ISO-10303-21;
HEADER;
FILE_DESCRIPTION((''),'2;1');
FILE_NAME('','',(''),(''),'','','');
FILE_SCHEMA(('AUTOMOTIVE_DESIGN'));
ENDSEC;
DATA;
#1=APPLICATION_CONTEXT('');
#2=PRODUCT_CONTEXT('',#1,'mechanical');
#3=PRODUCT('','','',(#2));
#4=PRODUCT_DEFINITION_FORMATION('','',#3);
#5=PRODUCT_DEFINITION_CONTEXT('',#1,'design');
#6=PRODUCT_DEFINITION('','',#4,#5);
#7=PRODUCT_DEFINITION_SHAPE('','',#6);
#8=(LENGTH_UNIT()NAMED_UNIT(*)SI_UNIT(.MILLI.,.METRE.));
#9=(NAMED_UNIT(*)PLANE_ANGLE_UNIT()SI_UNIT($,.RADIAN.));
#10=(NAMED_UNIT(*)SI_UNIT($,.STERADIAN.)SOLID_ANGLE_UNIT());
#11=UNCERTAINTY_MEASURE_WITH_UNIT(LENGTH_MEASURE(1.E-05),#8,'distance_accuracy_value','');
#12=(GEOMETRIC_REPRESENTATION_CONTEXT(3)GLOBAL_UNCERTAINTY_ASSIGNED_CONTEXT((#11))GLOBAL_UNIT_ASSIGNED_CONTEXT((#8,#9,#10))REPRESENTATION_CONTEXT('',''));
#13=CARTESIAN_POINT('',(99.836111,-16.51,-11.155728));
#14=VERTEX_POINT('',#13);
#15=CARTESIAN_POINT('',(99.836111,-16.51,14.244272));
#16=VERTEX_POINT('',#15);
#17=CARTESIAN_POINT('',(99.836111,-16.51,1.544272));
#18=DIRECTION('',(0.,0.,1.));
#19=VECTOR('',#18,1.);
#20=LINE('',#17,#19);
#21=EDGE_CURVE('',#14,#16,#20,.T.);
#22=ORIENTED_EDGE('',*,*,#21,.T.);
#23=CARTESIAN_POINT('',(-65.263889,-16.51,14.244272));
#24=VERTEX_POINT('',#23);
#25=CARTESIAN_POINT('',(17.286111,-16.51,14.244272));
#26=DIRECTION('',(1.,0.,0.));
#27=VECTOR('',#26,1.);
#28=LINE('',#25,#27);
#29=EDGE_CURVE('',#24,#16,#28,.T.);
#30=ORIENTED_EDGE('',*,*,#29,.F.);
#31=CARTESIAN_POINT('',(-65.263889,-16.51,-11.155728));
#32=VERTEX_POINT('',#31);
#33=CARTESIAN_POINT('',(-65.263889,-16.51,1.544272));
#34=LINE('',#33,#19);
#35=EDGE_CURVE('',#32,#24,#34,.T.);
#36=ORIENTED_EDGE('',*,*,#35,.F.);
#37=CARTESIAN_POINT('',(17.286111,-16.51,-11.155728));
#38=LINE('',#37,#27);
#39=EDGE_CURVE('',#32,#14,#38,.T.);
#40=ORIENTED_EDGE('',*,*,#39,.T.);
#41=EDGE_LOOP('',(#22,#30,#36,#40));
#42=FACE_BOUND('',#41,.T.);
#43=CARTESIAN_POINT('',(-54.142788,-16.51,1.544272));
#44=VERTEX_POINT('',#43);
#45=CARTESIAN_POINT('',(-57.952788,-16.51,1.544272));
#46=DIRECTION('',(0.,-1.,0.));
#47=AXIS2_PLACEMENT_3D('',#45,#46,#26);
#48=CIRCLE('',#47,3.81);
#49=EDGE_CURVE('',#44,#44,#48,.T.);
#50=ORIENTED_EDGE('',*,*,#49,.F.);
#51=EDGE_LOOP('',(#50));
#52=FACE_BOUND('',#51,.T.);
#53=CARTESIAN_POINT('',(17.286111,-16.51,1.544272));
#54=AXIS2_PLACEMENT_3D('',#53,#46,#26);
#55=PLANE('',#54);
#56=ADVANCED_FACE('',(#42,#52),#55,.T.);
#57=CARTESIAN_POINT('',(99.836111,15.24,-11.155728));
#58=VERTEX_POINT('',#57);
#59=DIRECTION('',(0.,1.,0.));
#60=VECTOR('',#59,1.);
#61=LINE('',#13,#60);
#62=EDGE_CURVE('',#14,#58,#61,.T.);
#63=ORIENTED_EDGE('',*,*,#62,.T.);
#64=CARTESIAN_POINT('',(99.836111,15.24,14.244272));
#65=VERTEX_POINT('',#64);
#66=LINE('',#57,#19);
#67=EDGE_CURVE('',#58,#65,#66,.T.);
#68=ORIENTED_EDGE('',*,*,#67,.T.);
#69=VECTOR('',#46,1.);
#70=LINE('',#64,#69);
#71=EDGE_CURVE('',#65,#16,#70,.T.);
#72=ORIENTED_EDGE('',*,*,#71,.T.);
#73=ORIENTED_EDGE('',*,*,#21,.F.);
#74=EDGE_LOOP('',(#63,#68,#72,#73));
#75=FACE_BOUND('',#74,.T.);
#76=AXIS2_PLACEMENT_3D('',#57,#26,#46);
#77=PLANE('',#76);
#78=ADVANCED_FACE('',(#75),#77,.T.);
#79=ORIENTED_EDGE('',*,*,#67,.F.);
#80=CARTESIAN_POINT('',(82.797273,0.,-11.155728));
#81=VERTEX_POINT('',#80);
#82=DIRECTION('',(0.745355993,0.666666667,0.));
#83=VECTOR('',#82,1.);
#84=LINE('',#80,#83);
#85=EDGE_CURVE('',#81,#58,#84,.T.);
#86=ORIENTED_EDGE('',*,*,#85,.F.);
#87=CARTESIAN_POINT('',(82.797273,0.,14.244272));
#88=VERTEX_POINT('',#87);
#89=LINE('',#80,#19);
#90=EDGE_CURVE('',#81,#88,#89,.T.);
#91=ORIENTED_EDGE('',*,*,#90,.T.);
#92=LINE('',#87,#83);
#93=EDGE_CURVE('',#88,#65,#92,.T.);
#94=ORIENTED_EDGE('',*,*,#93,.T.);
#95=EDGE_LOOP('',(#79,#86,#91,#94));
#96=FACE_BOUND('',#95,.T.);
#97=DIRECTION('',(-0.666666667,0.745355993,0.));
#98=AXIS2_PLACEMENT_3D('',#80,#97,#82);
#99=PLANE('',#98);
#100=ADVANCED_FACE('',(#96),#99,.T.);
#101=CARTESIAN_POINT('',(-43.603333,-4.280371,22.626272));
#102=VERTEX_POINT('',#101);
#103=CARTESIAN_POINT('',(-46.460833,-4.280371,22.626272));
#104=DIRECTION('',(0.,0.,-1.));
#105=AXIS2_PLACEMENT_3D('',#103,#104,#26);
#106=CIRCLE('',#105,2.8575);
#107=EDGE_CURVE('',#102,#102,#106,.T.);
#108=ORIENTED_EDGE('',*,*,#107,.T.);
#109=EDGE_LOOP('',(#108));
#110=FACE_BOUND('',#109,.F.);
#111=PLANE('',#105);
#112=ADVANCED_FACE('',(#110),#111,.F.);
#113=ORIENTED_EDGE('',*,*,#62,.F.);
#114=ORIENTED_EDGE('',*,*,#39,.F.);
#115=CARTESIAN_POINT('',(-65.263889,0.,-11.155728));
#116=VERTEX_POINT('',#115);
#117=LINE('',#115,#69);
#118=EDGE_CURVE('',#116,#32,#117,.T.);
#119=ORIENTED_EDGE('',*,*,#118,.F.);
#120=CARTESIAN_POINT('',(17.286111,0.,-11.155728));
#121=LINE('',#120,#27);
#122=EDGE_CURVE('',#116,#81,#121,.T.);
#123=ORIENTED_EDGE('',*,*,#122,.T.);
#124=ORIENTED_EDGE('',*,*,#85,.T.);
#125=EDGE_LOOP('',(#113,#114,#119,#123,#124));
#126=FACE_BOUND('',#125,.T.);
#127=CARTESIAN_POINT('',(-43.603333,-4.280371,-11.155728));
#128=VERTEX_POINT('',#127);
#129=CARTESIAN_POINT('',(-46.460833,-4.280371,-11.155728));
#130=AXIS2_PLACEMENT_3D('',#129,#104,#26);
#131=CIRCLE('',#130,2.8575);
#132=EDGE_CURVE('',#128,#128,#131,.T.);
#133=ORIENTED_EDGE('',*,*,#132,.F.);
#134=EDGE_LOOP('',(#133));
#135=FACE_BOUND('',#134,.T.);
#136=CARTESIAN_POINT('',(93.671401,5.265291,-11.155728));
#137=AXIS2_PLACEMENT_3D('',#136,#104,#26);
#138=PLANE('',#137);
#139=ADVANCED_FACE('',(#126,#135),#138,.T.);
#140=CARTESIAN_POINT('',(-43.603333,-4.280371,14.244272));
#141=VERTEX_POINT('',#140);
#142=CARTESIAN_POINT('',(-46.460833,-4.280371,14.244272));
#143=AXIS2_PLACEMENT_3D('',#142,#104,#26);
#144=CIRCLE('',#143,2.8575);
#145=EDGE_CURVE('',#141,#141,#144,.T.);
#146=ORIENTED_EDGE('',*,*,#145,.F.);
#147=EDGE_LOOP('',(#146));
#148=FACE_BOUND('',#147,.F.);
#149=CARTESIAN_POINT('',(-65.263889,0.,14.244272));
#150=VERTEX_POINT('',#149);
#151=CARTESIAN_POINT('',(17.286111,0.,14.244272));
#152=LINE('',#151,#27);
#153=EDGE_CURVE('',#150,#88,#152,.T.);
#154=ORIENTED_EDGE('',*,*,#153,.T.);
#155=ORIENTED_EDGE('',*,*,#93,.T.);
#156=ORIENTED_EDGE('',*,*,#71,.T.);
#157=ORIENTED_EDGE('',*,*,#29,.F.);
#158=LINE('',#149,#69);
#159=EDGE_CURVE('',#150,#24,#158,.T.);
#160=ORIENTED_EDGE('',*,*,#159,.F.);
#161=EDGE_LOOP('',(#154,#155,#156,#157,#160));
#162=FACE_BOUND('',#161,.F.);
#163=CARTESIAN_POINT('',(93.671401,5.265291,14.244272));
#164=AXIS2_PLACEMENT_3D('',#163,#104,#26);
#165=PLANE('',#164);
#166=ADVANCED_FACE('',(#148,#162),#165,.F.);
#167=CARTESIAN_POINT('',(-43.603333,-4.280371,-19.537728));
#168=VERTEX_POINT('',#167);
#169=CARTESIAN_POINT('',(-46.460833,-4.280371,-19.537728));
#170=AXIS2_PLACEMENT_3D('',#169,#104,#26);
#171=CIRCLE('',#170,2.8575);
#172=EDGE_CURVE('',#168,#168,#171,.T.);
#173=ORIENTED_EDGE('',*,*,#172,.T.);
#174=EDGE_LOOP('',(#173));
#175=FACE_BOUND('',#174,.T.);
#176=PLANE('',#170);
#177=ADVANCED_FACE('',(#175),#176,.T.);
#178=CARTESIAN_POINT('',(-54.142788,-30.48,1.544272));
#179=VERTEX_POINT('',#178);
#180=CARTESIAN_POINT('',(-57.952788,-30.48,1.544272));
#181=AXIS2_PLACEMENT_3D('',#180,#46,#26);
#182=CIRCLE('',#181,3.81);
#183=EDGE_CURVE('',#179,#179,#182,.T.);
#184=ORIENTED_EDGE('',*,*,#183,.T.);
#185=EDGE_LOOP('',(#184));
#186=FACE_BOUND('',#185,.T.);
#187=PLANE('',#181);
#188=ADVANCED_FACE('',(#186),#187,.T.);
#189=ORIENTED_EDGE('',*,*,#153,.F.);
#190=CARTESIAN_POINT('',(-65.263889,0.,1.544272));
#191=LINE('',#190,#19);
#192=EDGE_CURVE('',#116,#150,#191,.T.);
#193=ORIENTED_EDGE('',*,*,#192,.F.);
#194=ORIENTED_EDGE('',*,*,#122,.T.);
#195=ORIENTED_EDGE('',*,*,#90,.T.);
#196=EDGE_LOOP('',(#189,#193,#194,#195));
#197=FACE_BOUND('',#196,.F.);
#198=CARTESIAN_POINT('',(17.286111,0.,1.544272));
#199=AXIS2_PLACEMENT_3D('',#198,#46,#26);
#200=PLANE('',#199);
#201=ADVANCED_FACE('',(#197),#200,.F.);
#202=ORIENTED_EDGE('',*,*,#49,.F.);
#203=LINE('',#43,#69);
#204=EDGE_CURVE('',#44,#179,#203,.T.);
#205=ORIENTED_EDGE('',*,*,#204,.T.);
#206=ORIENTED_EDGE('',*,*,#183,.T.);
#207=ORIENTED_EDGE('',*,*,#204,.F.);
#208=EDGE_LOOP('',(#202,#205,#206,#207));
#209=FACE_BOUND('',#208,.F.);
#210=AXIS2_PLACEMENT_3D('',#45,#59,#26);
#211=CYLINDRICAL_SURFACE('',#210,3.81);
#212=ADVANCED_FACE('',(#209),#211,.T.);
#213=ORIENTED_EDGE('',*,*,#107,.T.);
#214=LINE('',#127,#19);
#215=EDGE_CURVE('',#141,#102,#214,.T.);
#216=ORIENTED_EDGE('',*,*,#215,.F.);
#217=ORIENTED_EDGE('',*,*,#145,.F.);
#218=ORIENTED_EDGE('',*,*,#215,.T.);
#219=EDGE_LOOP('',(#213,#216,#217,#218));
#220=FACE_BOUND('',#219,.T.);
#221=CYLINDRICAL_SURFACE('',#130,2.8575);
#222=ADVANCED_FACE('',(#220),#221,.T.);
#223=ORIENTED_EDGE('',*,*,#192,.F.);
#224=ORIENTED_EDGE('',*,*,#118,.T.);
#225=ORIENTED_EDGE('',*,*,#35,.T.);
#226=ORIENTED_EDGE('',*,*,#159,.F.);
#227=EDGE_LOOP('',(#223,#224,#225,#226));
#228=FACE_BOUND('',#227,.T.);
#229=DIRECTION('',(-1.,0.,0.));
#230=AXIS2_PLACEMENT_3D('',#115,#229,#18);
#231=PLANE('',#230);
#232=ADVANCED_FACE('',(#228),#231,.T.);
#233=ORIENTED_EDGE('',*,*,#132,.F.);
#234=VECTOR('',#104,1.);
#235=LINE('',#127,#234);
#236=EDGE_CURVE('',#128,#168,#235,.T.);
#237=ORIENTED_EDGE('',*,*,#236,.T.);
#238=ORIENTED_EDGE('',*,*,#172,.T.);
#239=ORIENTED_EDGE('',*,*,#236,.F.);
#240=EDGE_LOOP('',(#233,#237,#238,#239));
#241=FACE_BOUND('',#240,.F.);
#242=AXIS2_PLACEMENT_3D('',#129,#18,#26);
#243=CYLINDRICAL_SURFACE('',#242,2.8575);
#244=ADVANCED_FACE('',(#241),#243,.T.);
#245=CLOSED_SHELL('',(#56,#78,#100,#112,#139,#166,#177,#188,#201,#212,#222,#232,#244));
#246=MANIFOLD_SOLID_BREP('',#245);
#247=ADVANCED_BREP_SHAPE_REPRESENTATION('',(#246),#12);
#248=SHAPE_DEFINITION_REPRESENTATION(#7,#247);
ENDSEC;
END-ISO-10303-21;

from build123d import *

# Parameters (mm, degrees)
F0_W          = 165.1
F0_H          = 25.4
F1_DEPTH      = 16.51
F2_R          = 3.81
F3_DEPTH      = 13.97
F5_R          = 2.8575
F6_DEPTH      = 8.382
F6_DEPTH_BACK = 33.782
F7_DEPTH      = 25.4


# Not quite as in the source:
# - a feature names something its author has since deleted; it is built from what else it names


with BuildPart() as f1:
    # F0 (on Front) → F1 (new body)
    with BuildSketch(Plane.XZ):
        with Locations((17.2861106694, 1.5442719363)):
            Rectangle(F0_W, F0_H)
    extrude(amount=F1_DEPTH)

    # F2 (on face) → F3 (join)
    with BuildSketch(Plane.XZ.offset(16.51)):
        with Locations((-57.9527877271, 1.5442719363)):
            Circle(F2_R)
    extrude(amount=F3_DEPTH)

    # F5 (on face) → F6 (join, two sides)
    with BuildSketch(Plane(origin=(0, 0, -11.1557280637), x_dir=(1, 0, 0), z_dir=(0, 0, -1))) as f6_sk:
        with Locations((-46.4608334005, 4.2803706601)):
            Circle(F5_R)
    extrude(amount=F6_DEPTH)
    extrude(f6_sk.sketch, amount=-F6_DEPTH_BACK)

    # F4 (on face) → F7 (join)
    with BuildSketch(Plane(origin=(0, 0, -11.1557280637), x_dir=(1, 0, 0), z_dir=(0, 0, -1))):
        Polygon((99.8361106694, 0), (82.7972726808, 0), (99.8361106694, -15.24), align=None)
    extrude(amount=-F7_DEPTH)


solid = f1.part
